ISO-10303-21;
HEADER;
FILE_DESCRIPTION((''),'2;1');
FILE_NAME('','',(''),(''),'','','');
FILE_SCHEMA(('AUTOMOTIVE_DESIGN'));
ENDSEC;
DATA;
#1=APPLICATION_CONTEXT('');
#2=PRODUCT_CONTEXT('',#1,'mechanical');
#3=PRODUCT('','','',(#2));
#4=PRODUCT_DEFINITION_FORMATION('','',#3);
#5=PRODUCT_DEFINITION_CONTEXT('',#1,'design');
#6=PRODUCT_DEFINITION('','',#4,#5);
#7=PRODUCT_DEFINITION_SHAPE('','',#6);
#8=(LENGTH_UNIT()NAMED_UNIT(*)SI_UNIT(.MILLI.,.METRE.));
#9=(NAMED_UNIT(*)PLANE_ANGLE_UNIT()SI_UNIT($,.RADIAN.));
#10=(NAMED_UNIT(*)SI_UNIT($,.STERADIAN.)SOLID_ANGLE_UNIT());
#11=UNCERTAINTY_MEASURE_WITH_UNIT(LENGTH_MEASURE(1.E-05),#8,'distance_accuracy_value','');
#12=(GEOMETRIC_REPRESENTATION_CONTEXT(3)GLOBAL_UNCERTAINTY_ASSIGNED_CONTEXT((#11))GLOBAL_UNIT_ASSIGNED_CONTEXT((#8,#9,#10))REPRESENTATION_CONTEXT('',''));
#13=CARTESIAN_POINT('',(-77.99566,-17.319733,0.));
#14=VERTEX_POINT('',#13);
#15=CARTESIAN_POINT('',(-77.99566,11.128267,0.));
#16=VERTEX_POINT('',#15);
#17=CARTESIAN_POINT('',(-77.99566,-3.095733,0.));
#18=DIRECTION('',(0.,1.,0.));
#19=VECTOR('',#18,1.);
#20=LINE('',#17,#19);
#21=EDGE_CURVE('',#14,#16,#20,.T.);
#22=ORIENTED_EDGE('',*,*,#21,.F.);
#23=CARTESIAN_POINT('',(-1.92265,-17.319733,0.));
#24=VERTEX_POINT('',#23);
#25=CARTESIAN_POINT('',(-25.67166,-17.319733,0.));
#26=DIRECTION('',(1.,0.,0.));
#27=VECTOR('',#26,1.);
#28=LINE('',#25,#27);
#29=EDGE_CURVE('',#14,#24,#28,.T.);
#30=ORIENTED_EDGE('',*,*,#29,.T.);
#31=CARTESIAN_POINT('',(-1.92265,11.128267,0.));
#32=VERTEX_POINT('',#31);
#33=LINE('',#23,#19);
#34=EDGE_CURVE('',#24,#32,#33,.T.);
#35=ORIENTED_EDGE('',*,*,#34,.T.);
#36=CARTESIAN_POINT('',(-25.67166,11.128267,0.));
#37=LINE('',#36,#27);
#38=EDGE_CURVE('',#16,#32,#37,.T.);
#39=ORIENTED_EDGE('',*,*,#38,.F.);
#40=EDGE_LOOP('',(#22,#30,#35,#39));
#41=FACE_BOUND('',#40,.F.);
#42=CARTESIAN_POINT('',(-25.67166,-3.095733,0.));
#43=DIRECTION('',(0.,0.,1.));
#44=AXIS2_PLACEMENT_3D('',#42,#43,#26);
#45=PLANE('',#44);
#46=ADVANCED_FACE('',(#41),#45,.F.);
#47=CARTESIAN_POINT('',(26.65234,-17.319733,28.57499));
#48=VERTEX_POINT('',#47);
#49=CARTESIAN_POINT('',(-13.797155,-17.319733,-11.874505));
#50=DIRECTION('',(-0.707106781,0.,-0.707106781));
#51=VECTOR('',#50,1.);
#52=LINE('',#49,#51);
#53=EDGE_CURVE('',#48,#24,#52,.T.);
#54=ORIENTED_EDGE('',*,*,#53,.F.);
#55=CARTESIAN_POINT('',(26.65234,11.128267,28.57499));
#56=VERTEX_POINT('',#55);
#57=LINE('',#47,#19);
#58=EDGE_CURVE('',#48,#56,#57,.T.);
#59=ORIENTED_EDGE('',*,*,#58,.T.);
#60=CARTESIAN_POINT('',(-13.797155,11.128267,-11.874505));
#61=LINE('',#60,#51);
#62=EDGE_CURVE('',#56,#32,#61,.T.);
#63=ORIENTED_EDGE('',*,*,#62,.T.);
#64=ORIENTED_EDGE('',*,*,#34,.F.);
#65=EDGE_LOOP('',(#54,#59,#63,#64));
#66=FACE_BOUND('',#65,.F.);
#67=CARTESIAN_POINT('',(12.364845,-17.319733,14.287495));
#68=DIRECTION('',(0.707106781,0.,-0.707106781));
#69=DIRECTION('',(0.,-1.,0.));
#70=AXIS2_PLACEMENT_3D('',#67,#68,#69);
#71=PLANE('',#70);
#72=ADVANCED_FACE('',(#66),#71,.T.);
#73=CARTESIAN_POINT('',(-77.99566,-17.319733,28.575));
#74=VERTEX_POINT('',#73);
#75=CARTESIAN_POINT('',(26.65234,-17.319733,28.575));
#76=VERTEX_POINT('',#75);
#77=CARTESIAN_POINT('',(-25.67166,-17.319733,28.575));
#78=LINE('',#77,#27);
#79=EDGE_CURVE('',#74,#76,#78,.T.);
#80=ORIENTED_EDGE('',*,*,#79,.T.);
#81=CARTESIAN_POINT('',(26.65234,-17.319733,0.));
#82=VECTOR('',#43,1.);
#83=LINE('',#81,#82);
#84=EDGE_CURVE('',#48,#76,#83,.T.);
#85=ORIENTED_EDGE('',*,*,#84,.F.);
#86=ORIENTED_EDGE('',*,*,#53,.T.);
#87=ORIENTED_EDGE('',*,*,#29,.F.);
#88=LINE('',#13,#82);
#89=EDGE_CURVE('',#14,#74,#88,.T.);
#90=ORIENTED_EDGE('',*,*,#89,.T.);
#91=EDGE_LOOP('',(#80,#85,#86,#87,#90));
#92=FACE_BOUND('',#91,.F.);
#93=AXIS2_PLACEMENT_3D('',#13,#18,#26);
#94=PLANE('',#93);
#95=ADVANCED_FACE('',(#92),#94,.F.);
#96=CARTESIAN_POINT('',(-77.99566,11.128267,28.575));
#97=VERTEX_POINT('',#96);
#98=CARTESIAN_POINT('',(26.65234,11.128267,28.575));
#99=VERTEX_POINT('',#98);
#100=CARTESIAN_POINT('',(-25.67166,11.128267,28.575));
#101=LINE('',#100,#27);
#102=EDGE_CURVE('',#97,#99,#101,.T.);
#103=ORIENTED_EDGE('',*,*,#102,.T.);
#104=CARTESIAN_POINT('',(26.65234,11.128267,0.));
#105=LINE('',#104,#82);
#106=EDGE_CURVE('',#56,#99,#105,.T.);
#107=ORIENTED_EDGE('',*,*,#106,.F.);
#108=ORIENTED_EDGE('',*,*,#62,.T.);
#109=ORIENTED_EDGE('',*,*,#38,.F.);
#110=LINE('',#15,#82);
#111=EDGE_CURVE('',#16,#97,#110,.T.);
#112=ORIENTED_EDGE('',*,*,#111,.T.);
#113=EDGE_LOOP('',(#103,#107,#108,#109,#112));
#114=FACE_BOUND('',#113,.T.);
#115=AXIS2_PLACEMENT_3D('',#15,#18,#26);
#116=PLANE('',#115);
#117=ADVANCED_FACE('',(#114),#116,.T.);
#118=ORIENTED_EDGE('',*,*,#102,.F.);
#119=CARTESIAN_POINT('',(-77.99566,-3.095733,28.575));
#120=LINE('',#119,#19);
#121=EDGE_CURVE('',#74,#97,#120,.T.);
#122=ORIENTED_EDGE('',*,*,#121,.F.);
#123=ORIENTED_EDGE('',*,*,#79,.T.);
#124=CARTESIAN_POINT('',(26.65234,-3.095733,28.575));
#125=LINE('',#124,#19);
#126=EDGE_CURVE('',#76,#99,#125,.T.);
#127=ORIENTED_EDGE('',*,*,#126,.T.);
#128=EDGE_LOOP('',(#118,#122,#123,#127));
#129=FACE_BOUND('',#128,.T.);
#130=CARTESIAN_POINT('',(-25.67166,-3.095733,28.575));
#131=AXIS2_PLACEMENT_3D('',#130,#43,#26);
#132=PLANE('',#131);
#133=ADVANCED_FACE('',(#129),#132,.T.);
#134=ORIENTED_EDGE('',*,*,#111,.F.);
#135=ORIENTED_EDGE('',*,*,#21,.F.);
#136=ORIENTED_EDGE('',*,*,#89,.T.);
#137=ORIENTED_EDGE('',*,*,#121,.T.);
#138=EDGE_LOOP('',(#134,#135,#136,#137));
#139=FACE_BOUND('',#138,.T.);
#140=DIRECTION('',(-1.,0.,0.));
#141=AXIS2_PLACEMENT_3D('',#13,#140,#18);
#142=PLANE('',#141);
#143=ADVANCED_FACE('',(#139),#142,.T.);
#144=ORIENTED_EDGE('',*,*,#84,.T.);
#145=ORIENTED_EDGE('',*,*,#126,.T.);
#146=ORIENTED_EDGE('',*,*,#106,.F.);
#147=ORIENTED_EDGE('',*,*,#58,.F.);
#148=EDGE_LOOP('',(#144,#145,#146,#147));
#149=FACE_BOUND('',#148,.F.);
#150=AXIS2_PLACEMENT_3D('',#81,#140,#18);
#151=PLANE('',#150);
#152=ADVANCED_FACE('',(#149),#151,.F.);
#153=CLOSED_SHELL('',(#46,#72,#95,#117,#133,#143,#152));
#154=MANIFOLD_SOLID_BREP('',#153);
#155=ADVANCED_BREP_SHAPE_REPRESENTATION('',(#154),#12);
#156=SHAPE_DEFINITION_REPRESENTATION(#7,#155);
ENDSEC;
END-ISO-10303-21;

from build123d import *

# Parameters (mm, degrees)
F0_W     = 104.648
F0_H     = 28.448
F1_DEPTH = 28.575
F2_SIZE2 = 28.57499
F2_SIZE  = 28.57499


# Not quite as in the source:
# - a fillet or chamfer is up to 0.001 mm smaller than in the source, because OpenCascade refuses the exact size


with BuildPart() as f1:
    # F0 (on Top) → F1 (new body)
    with BuildSketch(Plane.XY):
        with Locations((-25.6716595031, -3.0957325469)):
            Rectangle(F0_W, F0_H)
    extrude(amount=F1_DEPTH)

    # F2 (size 28.575 and 28.575 in the source; OpenCascade refuses exactly that, so slightly less here)
    f2_edges = [f1.edges().sort_by_distance(p)[0] for p in [
        (26.65234, -3.095733, 0),
    ]]
    chamfer(f2_edges, length=F2_SIZE, length2=F2_SIZE2)


solid = f1.part
